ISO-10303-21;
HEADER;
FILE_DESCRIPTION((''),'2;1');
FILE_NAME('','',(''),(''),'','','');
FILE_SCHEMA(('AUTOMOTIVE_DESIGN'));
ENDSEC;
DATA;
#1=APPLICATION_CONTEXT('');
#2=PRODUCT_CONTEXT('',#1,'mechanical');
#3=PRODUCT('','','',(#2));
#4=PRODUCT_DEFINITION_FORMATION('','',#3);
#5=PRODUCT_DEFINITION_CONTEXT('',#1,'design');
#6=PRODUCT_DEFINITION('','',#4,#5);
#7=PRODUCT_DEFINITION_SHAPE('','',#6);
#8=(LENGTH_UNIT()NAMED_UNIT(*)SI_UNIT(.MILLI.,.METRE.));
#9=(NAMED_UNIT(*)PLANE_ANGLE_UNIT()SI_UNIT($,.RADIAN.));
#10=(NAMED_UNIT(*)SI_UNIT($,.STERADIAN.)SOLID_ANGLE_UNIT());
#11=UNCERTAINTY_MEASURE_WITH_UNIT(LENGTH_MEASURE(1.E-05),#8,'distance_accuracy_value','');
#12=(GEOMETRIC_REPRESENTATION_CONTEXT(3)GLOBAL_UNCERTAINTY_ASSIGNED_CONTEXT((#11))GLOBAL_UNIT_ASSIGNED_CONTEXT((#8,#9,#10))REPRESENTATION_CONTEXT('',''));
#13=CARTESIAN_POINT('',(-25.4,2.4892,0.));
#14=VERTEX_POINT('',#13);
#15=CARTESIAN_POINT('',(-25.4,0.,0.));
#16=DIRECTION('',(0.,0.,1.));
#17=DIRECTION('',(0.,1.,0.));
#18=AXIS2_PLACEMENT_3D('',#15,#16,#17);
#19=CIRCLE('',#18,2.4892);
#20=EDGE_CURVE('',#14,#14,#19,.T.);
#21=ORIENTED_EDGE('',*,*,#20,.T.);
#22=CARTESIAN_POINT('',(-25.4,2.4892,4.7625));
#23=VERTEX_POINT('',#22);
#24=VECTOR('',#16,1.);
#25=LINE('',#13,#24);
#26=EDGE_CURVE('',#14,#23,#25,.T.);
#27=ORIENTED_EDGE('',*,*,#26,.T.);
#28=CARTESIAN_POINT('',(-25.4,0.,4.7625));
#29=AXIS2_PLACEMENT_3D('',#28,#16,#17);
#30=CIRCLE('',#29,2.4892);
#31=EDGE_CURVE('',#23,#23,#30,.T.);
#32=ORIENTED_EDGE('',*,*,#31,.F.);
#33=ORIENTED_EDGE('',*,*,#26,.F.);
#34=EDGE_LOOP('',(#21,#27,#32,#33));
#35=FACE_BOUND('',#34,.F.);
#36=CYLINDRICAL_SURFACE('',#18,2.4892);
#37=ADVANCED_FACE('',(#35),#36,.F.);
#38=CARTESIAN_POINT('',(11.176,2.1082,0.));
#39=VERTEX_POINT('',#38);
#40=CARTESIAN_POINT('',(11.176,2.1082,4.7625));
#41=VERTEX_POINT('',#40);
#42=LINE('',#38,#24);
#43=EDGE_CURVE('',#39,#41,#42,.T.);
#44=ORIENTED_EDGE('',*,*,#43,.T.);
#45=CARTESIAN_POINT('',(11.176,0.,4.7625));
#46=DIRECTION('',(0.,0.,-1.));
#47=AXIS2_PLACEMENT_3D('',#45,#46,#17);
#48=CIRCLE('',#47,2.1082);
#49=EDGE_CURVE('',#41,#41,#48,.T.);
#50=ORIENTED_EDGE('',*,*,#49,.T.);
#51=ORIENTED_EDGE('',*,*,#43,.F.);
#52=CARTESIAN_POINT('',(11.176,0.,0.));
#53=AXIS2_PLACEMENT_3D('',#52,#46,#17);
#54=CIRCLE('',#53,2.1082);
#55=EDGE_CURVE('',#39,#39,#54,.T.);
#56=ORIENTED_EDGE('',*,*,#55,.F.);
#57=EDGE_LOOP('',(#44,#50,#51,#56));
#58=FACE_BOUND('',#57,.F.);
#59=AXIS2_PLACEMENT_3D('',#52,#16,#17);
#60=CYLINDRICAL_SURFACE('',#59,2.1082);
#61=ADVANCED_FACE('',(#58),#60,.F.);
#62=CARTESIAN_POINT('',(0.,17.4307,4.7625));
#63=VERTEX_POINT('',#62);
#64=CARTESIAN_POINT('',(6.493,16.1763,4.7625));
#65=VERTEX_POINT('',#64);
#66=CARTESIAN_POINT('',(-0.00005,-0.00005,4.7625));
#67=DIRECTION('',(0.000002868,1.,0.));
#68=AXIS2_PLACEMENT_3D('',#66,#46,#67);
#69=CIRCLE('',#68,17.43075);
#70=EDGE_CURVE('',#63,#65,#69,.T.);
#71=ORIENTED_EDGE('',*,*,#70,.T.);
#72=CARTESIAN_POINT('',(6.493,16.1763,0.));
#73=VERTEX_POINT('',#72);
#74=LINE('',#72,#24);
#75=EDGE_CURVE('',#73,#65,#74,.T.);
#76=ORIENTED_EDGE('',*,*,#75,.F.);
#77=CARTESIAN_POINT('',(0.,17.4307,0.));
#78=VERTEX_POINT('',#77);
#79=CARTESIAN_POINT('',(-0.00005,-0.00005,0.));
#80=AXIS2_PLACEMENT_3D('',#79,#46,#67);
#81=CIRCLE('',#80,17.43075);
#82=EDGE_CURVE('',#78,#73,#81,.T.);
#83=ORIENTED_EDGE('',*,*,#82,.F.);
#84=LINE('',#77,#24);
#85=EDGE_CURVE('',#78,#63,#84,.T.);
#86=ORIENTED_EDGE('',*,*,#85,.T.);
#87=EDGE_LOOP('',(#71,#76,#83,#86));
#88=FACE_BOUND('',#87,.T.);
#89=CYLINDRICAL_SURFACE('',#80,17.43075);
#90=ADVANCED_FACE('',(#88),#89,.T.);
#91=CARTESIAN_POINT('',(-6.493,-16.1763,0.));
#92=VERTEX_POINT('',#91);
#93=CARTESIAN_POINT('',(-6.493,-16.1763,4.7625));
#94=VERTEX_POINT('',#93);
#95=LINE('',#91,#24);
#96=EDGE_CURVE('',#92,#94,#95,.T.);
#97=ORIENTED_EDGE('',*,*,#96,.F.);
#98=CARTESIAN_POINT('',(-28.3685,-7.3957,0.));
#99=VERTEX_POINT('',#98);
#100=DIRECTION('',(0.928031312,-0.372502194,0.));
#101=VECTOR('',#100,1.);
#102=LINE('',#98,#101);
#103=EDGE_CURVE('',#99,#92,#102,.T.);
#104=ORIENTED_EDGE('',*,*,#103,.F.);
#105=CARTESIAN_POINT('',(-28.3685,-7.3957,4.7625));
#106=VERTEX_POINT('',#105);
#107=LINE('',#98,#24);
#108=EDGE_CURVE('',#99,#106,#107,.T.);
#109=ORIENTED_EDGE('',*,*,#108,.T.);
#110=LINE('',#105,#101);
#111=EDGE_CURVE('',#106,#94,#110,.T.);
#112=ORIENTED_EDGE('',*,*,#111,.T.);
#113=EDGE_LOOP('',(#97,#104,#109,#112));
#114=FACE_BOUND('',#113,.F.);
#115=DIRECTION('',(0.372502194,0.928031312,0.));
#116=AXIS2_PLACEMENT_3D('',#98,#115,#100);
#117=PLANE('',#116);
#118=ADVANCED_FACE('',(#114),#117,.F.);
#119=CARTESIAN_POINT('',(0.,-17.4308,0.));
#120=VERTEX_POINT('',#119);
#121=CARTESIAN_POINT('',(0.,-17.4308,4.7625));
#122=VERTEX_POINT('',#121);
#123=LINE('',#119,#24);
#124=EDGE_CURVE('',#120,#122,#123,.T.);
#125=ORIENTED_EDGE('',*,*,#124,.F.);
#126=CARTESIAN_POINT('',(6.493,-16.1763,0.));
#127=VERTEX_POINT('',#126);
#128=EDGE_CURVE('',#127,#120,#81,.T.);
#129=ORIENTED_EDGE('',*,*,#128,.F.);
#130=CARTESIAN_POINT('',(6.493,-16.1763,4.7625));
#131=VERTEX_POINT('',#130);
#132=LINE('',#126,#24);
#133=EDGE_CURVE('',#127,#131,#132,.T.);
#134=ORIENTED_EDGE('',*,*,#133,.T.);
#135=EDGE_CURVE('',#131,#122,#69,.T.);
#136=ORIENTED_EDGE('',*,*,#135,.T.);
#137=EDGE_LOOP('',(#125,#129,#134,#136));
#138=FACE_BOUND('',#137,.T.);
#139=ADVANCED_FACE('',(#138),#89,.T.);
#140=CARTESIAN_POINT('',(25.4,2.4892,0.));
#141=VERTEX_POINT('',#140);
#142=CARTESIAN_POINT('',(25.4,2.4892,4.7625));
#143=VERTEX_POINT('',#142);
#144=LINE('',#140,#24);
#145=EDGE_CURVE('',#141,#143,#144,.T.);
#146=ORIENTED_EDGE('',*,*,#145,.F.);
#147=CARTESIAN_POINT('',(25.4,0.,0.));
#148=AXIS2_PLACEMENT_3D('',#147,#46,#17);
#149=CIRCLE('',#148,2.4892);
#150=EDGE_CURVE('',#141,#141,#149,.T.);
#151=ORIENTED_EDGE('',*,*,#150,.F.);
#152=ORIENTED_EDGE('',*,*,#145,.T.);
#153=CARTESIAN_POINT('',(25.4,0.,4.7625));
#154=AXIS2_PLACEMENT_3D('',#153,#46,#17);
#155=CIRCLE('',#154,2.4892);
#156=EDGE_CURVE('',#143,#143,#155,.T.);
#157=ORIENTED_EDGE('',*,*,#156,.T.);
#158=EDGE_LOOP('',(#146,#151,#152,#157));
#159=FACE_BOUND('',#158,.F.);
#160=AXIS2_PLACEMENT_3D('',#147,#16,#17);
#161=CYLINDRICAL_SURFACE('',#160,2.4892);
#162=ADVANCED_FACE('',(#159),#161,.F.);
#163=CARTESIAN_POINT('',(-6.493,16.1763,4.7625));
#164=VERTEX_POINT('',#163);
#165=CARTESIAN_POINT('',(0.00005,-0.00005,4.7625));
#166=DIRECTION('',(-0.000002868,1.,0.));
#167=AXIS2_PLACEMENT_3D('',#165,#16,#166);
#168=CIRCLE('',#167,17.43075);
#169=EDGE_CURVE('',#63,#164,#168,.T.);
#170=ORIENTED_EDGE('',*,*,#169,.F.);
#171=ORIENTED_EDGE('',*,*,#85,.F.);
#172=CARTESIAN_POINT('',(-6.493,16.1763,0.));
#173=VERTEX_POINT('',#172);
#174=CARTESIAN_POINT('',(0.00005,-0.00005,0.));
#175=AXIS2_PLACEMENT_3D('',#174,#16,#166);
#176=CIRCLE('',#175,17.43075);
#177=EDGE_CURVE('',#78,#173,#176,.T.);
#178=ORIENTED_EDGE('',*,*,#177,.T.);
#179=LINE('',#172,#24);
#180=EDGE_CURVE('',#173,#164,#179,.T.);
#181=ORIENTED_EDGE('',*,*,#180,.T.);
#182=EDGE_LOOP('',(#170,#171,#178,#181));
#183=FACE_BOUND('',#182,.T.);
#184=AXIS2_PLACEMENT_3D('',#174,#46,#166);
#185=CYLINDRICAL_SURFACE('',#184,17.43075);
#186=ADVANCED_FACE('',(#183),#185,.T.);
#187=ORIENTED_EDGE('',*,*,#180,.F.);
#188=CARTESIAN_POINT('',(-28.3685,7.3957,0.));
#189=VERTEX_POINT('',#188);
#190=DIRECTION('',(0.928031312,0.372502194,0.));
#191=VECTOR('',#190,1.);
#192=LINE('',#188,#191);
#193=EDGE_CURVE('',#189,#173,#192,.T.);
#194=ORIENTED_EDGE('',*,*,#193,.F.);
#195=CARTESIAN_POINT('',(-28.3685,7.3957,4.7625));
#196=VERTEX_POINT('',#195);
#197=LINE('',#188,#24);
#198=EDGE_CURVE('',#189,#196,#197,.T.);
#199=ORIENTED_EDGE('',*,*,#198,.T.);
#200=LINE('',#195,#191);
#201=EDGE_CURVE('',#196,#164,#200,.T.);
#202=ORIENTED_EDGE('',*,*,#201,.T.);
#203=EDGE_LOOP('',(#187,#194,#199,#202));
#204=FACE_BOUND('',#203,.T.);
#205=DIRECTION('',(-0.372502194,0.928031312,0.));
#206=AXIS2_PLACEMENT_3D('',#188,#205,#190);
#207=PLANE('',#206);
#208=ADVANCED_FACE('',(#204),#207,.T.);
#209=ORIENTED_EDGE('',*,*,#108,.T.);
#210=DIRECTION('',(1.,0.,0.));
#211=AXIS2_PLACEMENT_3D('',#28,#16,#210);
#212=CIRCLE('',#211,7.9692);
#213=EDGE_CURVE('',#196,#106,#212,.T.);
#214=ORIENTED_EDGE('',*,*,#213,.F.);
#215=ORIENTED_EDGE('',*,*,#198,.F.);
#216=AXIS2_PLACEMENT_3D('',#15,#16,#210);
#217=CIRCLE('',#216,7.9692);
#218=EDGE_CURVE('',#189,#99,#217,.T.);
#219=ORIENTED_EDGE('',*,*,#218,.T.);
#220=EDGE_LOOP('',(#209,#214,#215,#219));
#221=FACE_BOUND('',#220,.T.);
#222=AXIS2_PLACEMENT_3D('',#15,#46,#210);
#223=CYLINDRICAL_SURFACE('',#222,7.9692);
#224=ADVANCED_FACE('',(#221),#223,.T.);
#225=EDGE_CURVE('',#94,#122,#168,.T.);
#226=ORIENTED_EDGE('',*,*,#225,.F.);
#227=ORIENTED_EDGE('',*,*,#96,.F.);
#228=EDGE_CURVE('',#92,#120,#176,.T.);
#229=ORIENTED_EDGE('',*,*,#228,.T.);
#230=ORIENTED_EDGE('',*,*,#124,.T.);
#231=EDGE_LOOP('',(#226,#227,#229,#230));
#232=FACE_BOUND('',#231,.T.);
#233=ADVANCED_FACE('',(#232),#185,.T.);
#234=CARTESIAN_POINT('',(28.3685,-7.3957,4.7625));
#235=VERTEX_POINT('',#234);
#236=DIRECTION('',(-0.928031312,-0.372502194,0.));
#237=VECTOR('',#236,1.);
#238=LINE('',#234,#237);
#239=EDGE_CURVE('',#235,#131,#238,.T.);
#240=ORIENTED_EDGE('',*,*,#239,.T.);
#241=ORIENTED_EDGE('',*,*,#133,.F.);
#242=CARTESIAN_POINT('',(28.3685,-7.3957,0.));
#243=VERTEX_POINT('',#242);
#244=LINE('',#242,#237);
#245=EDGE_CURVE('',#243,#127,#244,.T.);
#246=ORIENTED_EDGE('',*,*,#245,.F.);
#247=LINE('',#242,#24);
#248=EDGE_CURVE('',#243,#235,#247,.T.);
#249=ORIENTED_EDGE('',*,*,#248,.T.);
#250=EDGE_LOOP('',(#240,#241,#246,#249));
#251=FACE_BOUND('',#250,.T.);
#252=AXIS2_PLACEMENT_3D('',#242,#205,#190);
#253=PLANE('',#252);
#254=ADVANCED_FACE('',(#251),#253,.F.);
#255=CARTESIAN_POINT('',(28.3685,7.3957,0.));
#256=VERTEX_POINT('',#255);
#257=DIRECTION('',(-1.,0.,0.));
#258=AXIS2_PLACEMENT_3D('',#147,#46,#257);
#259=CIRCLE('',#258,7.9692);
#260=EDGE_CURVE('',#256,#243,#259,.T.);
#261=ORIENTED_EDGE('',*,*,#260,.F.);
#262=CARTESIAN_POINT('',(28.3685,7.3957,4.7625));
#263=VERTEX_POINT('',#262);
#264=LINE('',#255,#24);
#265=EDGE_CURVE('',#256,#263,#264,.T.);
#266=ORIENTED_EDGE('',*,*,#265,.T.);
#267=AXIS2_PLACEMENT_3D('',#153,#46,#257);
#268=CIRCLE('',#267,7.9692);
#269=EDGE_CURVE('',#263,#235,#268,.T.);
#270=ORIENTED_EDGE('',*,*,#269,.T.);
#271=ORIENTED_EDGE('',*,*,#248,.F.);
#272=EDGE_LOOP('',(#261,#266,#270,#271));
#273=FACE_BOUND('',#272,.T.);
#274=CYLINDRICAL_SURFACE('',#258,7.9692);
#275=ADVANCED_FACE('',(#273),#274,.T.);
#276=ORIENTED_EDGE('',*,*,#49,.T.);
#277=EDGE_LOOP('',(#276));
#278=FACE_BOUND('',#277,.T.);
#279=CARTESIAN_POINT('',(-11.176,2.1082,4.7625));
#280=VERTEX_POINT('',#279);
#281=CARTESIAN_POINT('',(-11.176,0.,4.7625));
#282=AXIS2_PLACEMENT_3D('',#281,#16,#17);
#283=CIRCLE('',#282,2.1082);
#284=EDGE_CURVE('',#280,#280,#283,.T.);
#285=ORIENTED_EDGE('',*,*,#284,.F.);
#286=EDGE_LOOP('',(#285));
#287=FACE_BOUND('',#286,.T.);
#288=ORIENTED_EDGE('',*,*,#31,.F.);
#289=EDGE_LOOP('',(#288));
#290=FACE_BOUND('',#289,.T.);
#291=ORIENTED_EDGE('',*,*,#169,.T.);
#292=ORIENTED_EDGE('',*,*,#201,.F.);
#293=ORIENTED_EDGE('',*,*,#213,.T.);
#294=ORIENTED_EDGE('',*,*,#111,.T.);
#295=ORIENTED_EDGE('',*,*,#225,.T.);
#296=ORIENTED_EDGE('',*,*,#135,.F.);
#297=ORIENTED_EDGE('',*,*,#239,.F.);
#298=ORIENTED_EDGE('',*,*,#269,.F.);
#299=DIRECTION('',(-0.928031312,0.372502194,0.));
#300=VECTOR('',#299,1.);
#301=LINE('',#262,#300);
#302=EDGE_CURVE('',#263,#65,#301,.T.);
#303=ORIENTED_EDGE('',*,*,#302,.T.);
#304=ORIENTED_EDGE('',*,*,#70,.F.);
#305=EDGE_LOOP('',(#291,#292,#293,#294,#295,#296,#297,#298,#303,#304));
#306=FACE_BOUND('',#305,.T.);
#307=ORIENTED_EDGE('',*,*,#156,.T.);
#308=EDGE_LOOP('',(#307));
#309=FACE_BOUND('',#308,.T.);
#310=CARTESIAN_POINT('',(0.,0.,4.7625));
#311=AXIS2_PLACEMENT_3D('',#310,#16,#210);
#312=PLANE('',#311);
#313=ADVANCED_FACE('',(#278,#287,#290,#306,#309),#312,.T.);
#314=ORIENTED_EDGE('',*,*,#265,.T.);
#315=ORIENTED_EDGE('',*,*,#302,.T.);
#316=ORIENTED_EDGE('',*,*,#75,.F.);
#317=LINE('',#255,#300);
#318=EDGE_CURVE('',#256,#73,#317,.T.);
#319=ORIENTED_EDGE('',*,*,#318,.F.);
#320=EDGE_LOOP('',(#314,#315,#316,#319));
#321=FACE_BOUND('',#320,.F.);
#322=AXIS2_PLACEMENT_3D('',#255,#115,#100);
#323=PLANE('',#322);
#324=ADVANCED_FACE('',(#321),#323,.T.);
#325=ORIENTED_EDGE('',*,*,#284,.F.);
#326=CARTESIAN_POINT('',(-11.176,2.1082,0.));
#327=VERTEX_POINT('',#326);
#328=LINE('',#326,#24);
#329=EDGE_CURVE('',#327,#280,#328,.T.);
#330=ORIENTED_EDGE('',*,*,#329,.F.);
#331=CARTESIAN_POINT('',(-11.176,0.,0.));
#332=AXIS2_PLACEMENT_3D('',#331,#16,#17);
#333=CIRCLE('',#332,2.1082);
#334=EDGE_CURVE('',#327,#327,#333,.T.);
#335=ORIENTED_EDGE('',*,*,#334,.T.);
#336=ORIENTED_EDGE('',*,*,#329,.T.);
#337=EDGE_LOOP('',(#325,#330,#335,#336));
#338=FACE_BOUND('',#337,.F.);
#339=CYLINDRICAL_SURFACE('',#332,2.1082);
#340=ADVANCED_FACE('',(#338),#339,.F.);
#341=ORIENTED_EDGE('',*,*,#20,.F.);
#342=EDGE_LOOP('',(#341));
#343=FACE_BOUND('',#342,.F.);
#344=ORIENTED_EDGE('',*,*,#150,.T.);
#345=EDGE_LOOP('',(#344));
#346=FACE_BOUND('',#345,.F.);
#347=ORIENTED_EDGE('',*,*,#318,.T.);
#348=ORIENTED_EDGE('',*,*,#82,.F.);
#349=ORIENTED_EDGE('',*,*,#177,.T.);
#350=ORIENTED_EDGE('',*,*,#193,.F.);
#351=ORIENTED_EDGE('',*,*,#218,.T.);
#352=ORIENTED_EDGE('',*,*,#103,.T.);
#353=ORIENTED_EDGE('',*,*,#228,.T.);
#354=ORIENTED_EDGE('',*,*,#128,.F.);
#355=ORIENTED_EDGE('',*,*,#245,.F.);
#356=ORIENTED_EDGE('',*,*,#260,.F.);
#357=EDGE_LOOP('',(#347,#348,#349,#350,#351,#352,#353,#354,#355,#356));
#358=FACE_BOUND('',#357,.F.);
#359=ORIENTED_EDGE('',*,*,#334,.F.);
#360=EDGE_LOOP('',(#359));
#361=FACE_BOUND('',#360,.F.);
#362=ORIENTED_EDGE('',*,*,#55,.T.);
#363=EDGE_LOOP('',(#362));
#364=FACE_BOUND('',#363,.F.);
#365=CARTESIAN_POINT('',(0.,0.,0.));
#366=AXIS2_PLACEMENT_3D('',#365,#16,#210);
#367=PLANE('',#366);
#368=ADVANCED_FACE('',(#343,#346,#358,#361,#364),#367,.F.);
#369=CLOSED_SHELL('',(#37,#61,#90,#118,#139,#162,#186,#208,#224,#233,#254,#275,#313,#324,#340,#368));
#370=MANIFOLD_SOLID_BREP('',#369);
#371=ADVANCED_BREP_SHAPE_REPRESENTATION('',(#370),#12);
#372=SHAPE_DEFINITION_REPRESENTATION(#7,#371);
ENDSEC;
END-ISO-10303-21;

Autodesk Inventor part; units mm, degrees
ref_plane "YZ Plane" through (0, 0, 0) normal (1, 0, 0) x (0, 1, 0)
ref_plane "XZ Plane" through (0, 0, 0) normal (0, 1, 0) x (-1, 0, 0)
ref_plane "XY Plane" through (0, 0, 0) normal (0, 0, 1) x (1, 0, 0)
sketch "Sketch1" plane through (0, 0, 0) normal (0, 0, 1) x (1, 0, 0)
  arc A0 (0, 14.224) -> (0, -14.224) centre (0, 0) ccw construction
  arc A1 (0, 17.4307) -> (0, -17.4308) centre (0, 0) ccw
  line L0 (0, 0) -> (-25.4, 0)
  circle A2 centre (-25.4, 0) radius 4.7625 construction
  line L1 (0, 14.224) -> (0, -14.224)
  circle A3 centre (-25.4, 0) radius 7.9692
  line L2 (0, 14.224) -> (0, 17.4307)
  line L3 (0, -14.224) -> (0, -17.4308)
  line L4 (-28.3685, 7.3957) -> (-6.493, 16.1763)
  line L5 (-28.3685, -7.3957) -> (-6.493, -16.1763)
  point P0 (-11.176, 0)
  dimension "d0" = 28.448
  dimension "d2" = 25.4
  dimension "d3" = 9.525
  dimension "d6" = 3.2067
  dimension "d7" = 3.2067
  dimension "d8" = 11.176
extrude "Extrusion1" add sketch "Sketch1" along normal blind 4.7625
hole "Hole1" at (-25.4, 0, 0) direction (0, 0, 1) diameter 4.9784 end through all clearance for "Socket Head Cap Screw" size "#10" standard "Ansi Unified Screw Threads"
hole "Hole2" at (-11.176, 0, 0) direction (0, 0, 1) diameter 4.2164 end through all
mirror "Mirror1" about plane through (0, -17.4308, 0) normal (1, 0, 0)
equation "\"d6\" = d7"
properties part number "Pneumatic Mounting Plate"
